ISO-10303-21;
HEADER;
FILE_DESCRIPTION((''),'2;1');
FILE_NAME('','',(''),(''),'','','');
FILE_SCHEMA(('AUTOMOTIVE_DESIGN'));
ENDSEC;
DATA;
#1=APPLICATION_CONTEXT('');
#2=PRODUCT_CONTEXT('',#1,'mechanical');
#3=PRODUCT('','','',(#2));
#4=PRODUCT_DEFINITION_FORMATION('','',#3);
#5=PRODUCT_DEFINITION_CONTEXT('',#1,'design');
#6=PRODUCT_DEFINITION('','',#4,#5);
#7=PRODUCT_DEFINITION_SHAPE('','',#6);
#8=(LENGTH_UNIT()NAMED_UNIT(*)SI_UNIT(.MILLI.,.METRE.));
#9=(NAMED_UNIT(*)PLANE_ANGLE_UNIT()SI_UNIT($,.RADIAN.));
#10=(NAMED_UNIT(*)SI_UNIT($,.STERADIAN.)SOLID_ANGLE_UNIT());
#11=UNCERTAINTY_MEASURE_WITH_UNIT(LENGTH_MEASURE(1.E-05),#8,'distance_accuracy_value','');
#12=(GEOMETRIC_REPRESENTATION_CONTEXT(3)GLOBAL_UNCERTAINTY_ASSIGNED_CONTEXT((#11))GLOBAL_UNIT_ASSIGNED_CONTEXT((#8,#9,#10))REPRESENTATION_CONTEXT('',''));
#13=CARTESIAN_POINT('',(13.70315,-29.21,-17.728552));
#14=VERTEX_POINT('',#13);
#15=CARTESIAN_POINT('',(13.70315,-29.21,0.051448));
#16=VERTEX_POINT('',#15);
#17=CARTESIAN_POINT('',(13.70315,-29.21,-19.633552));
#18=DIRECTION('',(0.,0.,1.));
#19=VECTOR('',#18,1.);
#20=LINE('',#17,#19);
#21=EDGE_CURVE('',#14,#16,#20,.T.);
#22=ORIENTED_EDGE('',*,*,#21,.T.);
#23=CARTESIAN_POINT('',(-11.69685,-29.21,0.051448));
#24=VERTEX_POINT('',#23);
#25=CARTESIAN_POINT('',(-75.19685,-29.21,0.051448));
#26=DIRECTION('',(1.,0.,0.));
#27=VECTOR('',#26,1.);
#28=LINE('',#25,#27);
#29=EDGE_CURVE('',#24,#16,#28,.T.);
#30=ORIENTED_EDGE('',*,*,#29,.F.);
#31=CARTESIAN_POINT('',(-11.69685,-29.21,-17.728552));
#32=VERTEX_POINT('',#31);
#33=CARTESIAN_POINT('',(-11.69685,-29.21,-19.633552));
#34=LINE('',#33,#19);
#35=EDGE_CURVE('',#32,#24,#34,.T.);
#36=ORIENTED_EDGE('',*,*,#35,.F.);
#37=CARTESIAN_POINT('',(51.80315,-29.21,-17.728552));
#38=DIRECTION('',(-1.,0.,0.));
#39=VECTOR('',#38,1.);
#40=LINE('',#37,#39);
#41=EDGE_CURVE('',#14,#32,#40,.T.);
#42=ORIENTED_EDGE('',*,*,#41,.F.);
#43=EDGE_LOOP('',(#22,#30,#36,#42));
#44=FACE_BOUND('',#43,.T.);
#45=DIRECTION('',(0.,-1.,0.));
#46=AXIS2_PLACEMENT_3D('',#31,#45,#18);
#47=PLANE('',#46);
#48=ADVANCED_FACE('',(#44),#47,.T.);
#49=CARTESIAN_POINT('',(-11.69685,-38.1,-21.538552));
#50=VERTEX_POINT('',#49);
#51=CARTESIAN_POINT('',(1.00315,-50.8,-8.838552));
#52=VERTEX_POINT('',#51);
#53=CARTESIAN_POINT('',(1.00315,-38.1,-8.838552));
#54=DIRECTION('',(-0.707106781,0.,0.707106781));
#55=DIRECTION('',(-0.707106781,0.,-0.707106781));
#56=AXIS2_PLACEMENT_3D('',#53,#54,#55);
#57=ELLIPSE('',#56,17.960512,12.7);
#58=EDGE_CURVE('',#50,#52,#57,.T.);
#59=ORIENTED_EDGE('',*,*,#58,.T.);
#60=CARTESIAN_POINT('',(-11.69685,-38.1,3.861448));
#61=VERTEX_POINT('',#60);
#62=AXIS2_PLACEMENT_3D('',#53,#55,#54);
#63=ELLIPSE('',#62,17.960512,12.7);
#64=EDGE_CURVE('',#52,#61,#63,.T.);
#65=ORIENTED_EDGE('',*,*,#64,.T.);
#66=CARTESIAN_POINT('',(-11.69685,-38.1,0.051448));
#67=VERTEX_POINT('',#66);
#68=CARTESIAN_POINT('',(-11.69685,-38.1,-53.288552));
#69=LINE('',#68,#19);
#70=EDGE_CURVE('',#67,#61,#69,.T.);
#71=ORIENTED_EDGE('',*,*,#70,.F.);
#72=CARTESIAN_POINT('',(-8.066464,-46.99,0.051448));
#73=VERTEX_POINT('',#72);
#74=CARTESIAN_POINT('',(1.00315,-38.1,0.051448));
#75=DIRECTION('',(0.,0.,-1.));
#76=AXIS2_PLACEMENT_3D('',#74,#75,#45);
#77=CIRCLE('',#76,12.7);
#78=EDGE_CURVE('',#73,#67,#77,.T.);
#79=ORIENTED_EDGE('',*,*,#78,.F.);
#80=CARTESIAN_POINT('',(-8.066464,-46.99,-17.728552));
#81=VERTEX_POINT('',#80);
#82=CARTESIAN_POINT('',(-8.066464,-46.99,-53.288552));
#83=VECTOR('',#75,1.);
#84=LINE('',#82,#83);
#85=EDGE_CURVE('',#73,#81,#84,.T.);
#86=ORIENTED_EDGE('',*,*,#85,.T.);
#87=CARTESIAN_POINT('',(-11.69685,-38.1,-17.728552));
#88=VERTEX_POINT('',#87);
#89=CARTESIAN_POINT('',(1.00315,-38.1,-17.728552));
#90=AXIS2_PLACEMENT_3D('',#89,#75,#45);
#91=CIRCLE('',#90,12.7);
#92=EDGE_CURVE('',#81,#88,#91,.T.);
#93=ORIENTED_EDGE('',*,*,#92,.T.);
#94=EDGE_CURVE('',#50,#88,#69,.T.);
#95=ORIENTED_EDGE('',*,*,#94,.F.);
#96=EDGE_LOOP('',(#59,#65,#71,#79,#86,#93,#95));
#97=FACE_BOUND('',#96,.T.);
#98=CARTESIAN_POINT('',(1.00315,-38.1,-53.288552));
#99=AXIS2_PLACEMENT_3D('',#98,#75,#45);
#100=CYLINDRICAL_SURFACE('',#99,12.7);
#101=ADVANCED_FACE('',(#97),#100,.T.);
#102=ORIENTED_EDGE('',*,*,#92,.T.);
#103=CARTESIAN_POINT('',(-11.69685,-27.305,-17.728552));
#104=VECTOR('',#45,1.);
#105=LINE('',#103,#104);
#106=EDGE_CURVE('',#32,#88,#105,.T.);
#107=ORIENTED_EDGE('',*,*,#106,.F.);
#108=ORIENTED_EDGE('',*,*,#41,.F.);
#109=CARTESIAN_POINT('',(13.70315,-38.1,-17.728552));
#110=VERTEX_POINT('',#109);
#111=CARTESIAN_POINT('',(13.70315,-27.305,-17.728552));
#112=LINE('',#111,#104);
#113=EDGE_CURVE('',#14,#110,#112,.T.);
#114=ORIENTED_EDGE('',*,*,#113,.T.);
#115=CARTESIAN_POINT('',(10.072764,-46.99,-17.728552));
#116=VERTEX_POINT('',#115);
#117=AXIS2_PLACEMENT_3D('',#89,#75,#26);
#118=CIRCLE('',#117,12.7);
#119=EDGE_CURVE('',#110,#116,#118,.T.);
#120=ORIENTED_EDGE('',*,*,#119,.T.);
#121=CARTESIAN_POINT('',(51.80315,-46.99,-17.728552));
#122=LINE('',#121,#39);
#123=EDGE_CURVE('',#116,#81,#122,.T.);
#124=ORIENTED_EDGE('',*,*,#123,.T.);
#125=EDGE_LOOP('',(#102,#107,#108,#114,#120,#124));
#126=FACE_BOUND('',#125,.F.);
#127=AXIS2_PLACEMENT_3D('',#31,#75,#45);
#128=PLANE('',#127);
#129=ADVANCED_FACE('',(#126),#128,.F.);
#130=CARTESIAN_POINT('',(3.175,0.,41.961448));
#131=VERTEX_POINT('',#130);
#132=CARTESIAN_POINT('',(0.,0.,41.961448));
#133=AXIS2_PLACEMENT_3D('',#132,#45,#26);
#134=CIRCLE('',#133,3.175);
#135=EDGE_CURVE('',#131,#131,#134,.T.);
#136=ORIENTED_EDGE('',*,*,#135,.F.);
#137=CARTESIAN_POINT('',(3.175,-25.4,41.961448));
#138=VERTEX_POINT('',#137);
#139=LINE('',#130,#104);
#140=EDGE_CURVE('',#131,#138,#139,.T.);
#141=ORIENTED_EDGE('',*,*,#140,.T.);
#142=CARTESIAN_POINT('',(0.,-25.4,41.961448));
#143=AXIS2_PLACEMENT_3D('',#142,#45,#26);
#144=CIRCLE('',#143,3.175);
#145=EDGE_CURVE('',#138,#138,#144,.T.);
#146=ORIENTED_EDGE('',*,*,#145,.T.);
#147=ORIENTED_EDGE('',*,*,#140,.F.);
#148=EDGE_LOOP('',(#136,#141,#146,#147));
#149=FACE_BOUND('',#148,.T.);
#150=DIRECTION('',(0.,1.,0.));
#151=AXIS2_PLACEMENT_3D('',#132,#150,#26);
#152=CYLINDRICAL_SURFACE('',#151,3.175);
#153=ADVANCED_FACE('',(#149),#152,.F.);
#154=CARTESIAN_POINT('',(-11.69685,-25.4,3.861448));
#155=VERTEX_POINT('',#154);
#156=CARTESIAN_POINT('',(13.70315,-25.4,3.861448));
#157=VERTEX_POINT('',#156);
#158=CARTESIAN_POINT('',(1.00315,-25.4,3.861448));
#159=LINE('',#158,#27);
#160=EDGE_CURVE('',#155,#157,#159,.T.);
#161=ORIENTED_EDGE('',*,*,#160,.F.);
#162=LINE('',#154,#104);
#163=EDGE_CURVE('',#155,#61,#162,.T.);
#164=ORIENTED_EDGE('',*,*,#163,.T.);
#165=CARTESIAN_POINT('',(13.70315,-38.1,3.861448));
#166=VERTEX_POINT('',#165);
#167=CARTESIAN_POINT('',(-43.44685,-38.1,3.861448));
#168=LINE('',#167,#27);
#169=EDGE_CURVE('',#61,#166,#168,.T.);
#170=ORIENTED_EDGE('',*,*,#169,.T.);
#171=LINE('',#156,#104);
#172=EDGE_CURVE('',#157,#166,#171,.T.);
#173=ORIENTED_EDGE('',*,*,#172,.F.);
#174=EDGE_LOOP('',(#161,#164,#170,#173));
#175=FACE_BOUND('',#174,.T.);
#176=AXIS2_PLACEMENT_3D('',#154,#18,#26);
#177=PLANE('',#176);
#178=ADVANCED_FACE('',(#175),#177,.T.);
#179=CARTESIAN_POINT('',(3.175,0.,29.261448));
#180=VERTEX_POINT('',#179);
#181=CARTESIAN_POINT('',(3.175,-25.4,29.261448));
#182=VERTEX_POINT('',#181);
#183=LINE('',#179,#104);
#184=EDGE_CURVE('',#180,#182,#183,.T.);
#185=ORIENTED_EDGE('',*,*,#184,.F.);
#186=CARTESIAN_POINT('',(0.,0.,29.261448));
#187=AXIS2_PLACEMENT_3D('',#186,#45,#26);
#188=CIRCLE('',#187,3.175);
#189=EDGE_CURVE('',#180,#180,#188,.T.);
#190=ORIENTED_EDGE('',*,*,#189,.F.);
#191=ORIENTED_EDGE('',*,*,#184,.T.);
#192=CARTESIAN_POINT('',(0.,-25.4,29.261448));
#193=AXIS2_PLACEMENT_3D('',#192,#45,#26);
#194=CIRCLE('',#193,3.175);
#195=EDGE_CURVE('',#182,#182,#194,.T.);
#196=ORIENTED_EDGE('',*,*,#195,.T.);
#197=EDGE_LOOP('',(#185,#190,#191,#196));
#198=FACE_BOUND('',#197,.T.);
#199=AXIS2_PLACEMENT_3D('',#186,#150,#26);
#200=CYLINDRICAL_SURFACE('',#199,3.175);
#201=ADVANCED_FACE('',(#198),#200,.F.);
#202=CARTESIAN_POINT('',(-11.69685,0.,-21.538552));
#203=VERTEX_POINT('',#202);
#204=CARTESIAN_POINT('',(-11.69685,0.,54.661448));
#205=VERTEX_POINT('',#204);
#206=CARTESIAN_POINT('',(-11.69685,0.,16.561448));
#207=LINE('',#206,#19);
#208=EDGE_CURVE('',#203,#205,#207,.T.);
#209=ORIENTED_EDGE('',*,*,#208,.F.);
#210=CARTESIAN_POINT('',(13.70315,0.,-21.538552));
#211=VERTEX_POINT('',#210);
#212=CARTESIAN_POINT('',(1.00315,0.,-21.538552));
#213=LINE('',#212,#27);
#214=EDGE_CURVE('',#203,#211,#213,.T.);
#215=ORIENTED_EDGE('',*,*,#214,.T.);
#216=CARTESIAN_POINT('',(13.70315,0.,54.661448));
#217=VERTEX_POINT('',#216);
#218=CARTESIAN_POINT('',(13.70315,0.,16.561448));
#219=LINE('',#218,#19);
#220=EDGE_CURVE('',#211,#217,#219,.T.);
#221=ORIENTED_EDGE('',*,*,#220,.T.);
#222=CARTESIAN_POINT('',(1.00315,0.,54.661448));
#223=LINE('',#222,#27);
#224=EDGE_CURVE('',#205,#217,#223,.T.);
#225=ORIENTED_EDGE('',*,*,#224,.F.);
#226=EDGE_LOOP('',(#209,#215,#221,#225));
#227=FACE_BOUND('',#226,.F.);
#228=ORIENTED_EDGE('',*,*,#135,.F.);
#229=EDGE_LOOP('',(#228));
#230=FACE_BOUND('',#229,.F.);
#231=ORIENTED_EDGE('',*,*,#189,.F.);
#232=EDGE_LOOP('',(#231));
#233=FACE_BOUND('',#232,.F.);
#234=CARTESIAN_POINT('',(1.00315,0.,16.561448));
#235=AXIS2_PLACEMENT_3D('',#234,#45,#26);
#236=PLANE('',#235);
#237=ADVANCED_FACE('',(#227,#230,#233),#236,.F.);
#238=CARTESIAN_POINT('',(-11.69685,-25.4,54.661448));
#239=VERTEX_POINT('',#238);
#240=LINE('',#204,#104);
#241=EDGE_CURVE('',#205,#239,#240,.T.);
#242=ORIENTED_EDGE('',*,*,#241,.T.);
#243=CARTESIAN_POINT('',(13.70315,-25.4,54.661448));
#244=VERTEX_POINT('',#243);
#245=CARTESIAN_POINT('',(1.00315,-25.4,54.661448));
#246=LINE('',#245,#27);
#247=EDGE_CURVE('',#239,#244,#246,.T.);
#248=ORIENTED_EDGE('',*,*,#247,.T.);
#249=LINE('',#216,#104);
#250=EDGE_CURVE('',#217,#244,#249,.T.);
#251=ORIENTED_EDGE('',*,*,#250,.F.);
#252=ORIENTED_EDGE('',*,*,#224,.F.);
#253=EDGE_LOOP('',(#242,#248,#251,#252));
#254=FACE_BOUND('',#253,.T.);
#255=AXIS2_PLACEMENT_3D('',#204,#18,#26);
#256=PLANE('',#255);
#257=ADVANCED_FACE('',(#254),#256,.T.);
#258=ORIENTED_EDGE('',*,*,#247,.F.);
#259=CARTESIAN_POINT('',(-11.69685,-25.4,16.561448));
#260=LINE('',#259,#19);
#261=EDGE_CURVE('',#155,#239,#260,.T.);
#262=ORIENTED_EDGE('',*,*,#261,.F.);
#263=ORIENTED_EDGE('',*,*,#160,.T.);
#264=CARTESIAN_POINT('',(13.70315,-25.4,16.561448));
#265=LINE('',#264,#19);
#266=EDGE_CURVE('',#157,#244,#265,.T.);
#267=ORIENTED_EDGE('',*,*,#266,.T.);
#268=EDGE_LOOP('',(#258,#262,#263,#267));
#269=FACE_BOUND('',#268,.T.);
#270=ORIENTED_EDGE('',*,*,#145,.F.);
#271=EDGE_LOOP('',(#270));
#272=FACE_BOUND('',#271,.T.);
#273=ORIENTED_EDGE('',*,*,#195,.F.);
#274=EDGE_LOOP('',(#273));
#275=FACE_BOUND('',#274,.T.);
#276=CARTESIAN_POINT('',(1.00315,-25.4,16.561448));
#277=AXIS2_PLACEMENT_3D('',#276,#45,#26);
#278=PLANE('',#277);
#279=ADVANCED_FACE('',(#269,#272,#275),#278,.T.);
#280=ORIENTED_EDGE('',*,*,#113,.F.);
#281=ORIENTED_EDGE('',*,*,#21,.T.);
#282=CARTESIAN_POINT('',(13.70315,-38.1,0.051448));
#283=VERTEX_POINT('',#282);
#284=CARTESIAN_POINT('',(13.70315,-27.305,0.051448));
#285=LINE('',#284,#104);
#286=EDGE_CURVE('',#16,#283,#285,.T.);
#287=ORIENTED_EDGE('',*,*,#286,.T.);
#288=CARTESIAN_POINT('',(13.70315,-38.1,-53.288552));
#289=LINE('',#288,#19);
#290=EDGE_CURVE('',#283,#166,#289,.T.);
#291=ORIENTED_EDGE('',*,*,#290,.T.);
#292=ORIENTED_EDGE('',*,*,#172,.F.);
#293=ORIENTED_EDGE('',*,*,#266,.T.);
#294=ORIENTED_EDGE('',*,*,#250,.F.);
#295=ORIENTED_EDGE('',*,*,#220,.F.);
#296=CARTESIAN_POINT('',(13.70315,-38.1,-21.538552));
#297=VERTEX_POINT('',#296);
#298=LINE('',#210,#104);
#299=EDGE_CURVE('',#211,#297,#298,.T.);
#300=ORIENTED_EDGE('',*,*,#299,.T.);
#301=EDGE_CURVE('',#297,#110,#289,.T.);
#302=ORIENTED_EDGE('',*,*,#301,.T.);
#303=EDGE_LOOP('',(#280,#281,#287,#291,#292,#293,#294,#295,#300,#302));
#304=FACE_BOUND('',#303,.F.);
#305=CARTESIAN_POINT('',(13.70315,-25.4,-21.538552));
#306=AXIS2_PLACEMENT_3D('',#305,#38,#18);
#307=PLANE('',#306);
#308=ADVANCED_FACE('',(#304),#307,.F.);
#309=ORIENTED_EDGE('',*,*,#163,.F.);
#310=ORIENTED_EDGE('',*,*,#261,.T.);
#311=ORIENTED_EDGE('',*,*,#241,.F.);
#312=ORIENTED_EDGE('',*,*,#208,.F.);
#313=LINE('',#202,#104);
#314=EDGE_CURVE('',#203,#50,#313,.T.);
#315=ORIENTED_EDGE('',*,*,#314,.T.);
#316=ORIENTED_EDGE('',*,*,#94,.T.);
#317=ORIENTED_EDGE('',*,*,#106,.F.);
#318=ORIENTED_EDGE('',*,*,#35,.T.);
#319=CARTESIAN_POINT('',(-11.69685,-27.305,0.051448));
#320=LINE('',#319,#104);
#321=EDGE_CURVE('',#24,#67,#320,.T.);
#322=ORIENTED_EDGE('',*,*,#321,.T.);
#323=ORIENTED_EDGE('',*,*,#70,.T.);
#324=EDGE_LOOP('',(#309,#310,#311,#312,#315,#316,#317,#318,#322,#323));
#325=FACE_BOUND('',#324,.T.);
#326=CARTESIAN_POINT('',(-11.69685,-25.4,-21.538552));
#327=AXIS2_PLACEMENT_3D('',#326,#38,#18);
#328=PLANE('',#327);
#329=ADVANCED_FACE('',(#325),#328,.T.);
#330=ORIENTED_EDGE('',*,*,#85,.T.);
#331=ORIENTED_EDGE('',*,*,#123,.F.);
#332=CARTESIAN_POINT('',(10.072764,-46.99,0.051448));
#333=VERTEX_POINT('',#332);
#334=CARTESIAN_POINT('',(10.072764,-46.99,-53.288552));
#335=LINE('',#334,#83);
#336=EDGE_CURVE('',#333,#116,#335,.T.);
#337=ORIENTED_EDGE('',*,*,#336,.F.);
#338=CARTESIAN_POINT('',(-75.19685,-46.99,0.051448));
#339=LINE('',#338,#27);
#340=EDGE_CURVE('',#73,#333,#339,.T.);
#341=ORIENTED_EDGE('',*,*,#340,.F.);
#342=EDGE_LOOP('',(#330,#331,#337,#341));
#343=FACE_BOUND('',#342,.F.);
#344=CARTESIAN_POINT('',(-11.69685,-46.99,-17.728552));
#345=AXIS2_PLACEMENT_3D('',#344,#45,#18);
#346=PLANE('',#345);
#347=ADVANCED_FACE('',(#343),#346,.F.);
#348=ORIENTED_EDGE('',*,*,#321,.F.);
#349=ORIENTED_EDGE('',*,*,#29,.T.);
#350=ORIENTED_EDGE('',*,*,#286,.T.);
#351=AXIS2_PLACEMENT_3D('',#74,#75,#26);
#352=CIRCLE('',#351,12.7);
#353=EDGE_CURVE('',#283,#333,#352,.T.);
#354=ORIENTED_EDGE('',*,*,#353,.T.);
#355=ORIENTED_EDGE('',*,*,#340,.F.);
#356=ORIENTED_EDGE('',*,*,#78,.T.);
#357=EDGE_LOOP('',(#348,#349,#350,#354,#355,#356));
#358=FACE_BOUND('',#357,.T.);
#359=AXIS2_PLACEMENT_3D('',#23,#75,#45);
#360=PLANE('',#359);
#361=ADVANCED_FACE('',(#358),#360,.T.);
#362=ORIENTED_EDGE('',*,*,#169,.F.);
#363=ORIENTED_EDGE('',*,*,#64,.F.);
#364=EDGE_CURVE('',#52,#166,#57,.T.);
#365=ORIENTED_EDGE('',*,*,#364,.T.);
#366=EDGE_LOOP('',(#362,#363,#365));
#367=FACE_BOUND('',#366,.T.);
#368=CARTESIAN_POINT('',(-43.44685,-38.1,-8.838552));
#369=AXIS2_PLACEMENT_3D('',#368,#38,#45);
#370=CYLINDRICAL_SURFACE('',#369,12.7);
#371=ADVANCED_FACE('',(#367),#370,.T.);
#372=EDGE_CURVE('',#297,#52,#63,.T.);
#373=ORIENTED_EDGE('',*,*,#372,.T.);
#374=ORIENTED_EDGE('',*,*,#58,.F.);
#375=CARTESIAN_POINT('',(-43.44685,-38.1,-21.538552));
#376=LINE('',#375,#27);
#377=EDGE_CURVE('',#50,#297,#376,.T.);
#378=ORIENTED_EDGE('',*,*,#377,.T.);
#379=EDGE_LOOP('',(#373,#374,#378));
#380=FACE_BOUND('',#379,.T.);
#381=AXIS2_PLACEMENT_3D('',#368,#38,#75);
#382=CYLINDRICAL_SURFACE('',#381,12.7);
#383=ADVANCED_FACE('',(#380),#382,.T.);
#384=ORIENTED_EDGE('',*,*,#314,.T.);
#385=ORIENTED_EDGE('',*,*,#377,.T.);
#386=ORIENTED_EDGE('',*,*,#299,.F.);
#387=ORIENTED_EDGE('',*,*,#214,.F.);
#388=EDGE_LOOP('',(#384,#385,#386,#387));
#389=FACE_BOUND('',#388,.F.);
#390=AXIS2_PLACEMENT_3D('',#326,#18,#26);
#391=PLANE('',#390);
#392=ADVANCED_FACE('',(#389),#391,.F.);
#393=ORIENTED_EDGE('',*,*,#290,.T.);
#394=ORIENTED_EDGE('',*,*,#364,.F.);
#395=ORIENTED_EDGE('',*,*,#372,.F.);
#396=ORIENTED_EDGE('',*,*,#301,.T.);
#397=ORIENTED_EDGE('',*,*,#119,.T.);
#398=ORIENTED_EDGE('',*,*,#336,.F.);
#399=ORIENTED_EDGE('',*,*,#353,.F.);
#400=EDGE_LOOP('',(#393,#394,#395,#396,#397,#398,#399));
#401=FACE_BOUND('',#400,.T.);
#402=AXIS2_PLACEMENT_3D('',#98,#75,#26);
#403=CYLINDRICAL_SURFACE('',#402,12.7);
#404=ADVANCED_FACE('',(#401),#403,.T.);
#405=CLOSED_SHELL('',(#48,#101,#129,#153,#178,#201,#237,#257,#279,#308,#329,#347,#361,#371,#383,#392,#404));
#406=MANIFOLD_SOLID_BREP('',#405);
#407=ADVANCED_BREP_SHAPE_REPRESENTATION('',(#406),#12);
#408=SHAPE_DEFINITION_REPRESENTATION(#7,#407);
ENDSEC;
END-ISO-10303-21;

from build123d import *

# Parameters (mm, degrees)
F0_W        = 25.4
F0_H        = 76.2
F0_R        = 3.175
F1_DEPTH    = 25.4
F2_W        = 25.4
F2_H        = 25.4
F3_DEPTH    = 25.4
F4_W        = 17.78
F4_H        = 17.78
F5_DEPTH    = 63.5
F6_T1_DEPTH = 88.9
F6_T3_DEPTH = 88.9


# Not quite as in the source:
# - a fillet or chamfer that OpenCascade refuses, or shapes differently, is made with other operations: its cross-section is extruded or revolved along the edge and cut away or added


with BuildPart() as f1:
    # F0 (on Front) → F1 (new body)
    with BuildSketch(Plane.XZ):
        with Locations((1.0031497249, 16.5614479933)):
            Rectangle(F0_W, F0_H)
        with Locations((0, 29.2614479933)):
            Circle(F0_R, mode=Mode.SUBTRACT)
        with Locations((0, 41.9614479933)):
            Circle(F0_R, mode=Mode.SUBTRACT)
    extrude(amount=F1_DEPTH)

    # F2 (on face) → F3 (join)
    with BuildSketch(Plane.XZ.offset(25.4)):
        with Locations((1.0031497249, -8.8385520067)):
            Rectangle(F2_W, F2_H)
    extrude(amount=F3_DEPTH)

    # F4 (on face) → F5 (cut, symmetric)
    with BuildSketch(Plane(origin=(-11.6968502751, 0, 0), x_dir=(0, -1, 0), z_dir=(-1, 0, 0))):
        with Locations((38.1, -8.8385520067)):
            Rectangle(F4_W, F4_H)
    extrude(amount=F5_DEPTH, both=True, mode=Mode.SUBTRACT)

    # F6: fillet of radius 12.7 on 4 edges, made by hand

    # F6_s2 → F6_t1 (cut)
    with BuildSketch(Plane.YZ.offset(-43.4468502751)):
        with BuildLine():
            ThreePointArc((-50.8, -8.8385520067), (-47.0802561211, 0.1417041144), (-38.1, 3.8614479933))
            Line((-38.1, 3.8614479933), (-50.8, 3.8614479933))
            Line((-50.8, 3.8614479933), (-50.8, -8.8385520067))
        make_face()
        with BuildLine():
            ThreePointArc((-38.1, -21.5385520067), (-47.0802561211, -17.8188081278), (-50.8, -8.8385520067))
            Line((-50.8, -8.8385520067), (-50.8, -21.5385520067))
            Line((-50.8, -21.5385520067), (-38.1, -21.5385520067))
        make_face()
    extrude(amount=F6_T1_DEPTH, mode=Mode.SUBTRACT)

    # F6_s4 → F6_t3 (cut)
    with BuildSketch(Plane.XY.offset(-53.2885520067)):
        with BuildLine():
            ThreePointArc((1.0031497249, -50.8), (-7.9771063962, -47.0802561211), (-11.6968502751, -38.1))
            Line((-11.6968502751, -38.1), (-11.6968502751, -50.8))
            Line((-11.6968502751, -50.8), (1.0031497249, -50.8))
        make_face()
        with BuildLine():
            ThreePointArc((13.7031497249, -38.1), (9.983405846, -47.0802561211), (1.0031497249, -50.8))
            Line((1.0031497249, -50.8), (13.7031497249, -50.8))
            Line((13.7031497249, -50.8), (13.7031497249, -38.1))
        make_face()
    extrude(amount=F6_T3_DEPTH, mode=Mode.SUBTRACT)


solid = f1.part
